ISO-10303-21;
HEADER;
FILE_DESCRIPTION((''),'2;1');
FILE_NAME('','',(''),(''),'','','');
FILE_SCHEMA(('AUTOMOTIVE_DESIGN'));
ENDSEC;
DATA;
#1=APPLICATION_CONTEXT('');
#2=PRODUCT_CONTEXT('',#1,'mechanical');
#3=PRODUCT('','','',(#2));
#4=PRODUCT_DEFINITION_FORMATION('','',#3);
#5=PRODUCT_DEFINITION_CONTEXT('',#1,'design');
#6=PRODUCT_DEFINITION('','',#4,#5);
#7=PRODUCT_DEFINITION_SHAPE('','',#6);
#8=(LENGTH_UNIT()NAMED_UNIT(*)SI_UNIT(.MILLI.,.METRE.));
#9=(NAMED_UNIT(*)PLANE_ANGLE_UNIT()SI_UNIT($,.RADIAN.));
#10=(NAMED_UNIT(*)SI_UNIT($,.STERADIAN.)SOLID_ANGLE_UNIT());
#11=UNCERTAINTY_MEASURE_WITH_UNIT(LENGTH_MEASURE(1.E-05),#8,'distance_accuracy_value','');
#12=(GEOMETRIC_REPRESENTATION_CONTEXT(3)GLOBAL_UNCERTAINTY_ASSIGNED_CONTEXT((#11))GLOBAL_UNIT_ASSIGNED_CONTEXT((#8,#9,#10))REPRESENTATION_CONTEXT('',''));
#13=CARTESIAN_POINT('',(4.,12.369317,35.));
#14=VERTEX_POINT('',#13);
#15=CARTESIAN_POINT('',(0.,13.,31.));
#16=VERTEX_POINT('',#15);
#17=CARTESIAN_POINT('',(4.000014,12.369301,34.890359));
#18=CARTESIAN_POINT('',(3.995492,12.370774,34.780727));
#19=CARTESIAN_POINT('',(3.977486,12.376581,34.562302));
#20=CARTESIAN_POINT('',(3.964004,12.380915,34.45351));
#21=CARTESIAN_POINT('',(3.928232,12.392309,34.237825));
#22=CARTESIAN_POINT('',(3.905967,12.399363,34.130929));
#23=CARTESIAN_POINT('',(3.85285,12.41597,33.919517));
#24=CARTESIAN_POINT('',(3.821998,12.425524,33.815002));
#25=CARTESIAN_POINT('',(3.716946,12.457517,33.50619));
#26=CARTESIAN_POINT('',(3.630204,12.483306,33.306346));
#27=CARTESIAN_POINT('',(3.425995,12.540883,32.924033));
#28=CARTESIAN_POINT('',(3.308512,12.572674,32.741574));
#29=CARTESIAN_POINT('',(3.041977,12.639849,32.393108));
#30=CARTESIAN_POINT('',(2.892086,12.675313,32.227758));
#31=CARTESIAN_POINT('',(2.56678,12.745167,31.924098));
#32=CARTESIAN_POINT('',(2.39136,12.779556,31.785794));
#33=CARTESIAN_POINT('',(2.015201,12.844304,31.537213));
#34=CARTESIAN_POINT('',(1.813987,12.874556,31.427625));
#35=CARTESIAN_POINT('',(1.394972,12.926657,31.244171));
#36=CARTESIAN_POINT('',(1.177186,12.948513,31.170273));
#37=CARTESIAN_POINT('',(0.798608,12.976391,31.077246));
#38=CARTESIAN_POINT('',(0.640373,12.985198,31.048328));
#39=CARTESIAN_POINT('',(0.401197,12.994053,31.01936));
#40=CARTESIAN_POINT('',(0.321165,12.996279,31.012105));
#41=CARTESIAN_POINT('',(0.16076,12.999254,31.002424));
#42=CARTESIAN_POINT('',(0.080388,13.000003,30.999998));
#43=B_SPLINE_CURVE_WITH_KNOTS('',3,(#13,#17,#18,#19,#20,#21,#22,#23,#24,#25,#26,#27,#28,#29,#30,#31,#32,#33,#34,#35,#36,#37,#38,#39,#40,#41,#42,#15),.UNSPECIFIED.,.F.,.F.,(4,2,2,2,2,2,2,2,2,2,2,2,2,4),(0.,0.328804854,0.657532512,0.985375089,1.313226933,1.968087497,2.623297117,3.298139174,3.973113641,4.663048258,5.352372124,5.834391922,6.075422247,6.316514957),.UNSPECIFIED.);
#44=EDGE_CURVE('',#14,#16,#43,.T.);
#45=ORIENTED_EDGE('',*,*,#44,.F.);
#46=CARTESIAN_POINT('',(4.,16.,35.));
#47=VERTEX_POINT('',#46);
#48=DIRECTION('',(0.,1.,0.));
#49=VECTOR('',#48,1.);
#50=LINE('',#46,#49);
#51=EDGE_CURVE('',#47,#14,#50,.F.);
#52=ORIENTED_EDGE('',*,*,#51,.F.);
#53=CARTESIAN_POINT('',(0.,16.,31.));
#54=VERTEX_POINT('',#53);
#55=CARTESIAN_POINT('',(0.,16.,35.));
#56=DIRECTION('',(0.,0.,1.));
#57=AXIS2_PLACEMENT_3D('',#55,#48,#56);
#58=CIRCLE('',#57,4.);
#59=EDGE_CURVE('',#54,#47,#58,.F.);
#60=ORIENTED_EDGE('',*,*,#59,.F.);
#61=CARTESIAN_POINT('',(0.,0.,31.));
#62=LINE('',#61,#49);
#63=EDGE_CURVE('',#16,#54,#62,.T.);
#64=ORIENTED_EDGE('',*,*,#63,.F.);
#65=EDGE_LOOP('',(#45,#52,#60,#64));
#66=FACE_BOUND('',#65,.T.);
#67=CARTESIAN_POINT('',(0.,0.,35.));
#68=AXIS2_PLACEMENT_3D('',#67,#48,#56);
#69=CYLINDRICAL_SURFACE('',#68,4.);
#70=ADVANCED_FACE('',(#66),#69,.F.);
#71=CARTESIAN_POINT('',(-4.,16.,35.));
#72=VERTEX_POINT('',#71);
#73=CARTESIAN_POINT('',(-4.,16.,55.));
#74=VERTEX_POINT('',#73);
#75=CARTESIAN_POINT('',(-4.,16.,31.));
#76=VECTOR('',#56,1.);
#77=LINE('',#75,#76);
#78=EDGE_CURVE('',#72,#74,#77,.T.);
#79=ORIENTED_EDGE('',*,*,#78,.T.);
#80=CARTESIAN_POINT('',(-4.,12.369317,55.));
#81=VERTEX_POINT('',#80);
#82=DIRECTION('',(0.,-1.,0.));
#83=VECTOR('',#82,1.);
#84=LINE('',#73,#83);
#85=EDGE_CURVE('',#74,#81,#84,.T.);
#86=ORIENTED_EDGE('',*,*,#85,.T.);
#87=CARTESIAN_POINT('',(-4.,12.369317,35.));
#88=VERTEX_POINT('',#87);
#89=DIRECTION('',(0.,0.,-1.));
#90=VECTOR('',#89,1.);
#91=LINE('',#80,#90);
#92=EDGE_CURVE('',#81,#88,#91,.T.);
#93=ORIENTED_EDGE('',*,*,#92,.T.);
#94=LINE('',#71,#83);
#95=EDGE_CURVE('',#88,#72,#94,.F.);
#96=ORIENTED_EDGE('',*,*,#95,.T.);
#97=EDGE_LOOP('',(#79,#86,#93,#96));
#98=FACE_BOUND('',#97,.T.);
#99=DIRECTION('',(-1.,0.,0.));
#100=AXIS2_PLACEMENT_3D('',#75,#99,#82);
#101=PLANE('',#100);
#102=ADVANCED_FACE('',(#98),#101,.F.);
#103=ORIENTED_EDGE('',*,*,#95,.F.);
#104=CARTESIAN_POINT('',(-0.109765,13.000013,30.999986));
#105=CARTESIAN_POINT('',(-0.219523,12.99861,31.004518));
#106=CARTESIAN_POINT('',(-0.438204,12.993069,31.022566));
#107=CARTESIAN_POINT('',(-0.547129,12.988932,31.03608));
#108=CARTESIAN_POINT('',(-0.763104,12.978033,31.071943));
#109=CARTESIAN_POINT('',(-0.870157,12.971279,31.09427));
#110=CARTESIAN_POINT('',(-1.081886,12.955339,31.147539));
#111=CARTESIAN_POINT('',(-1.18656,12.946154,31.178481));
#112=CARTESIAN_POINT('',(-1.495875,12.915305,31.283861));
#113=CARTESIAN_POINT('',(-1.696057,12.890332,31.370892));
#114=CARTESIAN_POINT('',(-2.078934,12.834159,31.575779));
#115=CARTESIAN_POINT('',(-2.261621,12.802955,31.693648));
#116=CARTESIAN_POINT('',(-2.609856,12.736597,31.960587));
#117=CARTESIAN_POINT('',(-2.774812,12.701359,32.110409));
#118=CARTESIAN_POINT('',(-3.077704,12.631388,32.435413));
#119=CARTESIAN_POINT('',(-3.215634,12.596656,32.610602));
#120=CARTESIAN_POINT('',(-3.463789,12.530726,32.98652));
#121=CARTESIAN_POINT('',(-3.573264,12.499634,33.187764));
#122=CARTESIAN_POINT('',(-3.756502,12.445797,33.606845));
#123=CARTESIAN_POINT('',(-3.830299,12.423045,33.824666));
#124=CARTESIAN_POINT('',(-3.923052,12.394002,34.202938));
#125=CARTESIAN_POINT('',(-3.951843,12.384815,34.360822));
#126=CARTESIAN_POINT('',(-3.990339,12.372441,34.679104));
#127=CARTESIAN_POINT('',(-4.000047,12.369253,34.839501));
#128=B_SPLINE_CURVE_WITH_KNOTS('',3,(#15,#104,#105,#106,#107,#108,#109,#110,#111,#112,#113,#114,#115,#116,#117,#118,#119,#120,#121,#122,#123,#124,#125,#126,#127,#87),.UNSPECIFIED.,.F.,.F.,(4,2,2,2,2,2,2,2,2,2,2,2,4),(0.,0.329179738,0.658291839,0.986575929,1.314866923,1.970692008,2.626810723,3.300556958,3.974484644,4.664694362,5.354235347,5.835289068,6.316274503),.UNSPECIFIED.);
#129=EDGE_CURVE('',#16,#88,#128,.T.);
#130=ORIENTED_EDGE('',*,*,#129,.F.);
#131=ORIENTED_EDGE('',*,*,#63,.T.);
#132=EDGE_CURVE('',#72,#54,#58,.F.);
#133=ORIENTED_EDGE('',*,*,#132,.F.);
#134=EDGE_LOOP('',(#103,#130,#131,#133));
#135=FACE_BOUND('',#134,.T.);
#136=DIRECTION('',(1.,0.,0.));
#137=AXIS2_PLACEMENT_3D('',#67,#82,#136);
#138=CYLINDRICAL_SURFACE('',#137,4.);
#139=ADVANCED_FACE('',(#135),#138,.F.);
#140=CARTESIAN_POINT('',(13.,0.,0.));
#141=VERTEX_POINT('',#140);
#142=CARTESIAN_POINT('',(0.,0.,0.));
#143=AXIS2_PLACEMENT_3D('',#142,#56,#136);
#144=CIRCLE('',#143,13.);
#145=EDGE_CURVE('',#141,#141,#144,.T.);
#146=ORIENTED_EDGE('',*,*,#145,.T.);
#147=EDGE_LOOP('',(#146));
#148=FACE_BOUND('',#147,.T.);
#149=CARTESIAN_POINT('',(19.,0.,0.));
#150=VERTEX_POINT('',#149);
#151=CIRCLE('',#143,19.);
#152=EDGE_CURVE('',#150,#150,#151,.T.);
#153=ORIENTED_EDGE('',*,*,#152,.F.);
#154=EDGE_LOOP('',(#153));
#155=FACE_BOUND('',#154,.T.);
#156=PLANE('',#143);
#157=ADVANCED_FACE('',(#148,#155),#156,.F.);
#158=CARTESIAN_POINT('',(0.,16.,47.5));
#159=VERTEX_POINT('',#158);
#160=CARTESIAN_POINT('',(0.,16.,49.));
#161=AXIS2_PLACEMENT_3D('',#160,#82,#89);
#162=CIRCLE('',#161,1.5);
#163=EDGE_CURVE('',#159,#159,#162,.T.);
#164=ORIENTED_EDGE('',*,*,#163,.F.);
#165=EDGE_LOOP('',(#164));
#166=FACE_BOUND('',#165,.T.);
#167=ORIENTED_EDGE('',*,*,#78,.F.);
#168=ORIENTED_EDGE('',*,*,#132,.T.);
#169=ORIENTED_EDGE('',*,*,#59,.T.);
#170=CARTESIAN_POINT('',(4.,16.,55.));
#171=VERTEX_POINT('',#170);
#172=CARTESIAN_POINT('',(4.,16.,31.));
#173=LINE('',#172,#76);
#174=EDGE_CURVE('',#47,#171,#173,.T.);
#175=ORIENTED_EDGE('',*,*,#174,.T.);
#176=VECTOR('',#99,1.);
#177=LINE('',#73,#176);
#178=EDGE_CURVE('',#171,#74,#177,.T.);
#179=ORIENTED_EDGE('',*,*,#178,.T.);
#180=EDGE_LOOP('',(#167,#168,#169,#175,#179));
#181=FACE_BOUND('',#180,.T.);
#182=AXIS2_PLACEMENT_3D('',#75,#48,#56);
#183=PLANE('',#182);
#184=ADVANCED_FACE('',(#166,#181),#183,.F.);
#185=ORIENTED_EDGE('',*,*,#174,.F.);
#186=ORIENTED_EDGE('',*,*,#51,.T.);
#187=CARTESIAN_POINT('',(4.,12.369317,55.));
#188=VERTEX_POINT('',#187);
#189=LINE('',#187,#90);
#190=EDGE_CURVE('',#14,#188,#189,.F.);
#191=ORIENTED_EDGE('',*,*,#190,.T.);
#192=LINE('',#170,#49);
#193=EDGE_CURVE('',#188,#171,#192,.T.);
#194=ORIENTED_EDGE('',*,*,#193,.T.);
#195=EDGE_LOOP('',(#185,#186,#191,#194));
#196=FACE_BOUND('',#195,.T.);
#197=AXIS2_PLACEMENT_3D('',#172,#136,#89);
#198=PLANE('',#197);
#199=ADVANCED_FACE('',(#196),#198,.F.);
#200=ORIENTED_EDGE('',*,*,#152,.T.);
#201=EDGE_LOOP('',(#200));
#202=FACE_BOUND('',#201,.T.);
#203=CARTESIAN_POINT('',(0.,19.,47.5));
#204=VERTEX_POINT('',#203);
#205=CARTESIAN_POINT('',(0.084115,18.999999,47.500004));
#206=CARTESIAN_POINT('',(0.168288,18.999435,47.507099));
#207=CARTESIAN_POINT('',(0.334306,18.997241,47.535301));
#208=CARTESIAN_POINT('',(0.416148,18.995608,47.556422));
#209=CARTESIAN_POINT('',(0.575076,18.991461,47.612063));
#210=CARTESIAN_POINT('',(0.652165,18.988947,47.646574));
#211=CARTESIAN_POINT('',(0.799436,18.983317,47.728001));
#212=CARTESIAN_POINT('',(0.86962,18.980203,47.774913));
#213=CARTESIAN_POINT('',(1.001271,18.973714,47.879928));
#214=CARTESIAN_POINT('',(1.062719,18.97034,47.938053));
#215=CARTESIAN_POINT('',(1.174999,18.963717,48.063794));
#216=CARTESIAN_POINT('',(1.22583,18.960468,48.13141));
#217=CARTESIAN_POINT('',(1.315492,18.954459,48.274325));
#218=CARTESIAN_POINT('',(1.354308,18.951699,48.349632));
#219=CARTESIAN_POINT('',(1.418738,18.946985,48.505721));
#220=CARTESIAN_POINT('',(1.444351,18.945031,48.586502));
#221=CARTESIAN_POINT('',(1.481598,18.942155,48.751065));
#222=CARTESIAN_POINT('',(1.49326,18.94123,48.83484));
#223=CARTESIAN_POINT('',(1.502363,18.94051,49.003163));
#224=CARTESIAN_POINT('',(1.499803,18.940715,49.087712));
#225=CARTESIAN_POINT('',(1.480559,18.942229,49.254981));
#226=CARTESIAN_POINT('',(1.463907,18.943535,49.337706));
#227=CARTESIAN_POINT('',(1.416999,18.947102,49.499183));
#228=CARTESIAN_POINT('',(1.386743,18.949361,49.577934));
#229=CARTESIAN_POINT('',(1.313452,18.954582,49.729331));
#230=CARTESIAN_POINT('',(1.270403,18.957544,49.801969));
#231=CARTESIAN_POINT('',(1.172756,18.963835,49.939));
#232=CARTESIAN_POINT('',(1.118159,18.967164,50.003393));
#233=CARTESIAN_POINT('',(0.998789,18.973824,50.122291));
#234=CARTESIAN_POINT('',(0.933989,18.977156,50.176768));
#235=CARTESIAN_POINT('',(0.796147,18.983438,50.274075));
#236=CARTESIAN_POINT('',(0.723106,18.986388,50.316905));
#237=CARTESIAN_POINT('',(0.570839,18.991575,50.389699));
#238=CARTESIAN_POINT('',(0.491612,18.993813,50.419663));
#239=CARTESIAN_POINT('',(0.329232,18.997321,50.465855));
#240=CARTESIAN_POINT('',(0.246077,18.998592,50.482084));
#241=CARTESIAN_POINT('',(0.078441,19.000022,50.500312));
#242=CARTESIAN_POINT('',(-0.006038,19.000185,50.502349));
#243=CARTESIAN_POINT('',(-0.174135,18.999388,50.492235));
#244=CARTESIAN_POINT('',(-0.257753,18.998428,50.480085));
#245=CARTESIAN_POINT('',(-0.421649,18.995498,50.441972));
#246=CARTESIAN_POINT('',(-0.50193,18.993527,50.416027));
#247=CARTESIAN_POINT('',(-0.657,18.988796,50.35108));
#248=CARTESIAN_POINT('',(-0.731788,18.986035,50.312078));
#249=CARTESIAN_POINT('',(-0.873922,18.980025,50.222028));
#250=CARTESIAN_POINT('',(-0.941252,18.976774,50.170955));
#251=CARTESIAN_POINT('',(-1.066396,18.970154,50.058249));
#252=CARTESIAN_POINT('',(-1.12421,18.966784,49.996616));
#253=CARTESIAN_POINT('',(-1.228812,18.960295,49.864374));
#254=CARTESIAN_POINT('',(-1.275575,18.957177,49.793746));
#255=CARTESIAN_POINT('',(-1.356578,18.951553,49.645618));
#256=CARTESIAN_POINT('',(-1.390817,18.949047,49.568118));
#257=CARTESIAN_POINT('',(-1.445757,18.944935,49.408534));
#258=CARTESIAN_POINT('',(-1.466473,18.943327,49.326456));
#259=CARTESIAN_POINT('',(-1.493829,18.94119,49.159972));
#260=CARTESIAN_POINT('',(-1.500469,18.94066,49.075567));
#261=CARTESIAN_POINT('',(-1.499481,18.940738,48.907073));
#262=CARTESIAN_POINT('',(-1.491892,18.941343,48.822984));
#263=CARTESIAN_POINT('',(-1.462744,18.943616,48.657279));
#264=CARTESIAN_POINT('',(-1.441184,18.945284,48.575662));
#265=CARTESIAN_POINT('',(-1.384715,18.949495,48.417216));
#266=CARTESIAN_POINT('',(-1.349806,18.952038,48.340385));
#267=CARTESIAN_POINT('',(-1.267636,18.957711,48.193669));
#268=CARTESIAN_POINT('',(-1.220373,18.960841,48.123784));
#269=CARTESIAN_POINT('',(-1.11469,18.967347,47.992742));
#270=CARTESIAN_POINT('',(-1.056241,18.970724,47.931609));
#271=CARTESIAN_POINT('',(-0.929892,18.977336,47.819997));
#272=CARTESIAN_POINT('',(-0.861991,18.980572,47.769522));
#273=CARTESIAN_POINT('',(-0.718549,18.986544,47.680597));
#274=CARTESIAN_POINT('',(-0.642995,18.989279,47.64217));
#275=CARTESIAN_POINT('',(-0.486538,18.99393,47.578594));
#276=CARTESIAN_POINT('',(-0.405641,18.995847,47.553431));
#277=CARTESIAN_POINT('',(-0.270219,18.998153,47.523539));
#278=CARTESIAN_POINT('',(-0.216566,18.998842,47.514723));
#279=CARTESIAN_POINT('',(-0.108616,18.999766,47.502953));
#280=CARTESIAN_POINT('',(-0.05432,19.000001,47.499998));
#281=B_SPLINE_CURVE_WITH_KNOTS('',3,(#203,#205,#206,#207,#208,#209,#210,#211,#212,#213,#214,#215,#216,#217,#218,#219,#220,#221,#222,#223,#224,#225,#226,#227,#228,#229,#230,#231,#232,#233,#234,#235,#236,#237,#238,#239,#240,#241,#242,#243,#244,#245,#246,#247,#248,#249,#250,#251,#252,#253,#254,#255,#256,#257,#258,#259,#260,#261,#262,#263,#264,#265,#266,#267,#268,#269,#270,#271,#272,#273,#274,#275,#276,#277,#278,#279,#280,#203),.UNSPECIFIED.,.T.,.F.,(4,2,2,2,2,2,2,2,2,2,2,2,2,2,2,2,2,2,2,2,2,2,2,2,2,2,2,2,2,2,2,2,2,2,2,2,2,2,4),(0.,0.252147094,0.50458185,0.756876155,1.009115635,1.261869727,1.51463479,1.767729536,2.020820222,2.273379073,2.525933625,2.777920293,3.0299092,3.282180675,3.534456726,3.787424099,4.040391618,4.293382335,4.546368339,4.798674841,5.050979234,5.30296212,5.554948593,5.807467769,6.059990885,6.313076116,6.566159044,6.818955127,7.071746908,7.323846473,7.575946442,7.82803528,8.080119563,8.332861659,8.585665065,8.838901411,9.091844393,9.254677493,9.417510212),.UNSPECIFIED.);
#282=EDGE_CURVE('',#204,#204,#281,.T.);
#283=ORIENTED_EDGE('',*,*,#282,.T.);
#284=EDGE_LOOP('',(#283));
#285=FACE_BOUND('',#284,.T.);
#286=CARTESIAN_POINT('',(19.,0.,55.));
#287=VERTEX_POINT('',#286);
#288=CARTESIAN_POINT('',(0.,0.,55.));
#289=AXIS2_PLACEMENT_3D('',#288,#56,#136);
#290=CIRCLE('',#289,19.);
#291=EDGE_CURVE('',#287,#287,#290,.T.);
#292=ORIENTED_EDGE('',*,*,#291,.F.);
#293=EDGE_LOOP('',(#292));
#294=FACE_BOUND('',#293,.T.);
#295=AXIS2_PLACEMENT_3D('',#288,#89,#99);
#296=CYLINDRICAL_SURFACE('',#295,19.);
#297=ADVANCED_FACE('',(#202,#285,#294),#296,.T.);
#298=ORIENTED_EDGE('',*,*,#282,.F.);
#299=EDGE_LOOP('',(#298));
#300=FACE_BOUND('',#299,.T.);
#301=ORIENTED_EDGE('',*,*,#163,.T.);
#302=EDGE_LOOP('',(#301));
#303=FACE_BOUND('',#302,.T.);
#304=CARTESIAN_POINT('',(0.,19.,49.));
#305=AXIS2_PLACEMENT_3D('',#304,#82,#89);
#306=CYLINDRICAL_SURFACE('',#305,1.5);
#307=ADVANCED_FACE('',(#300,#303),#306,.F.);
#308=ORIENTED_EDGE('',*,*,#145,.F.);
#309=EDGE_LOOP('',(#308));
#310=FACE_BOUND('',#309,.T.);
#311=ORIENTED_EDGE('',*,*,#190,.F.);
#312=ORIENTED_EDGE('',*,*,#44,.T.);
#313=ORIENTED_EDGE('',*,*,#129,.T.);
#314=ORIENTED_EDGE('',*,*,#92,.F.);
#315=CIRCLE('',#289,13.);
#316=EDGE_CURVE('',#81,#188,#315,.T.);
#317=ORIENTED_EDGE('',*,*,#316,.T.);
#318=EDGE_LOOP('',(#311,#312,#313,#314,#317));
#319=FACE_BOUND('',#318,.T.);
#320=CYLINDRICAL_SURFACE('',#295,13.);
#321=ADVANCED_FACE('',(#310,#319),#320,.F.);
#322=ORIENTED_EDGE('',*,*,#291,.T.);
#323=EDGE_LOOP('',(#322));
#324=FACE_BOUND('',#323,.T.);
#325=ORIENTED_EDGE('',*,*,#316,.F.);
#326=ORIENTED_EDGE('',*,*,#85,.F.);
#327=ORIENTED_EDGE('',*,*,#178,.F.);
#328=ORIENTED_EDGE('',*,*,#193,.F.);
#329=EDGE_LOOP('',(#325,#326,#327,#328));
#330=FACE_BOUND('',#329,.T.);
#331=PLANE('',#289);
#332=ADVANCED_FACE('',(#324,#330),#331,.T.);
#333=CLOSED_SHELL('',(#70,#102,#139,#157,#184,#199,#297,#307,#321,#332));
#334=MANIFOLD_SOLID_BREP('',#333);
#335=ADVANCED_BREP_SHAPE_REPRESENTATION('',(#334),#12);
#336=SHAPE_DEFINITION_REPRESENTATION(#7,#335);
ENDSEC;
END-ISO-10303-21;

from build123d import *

# Parameters (mm, degrees)
SKETCH1_R           = 19
SKETCH1_R_2         = 13
BOSS_EXTRUDE1_DEPTH = 55
SKETCH2_W           = 8
SKETCH2_H           = 6
CUT_EXTRUDE3_DEPTH  = 24
FILLET5_R           = 4
FILLET6_R           = 4
SKETCH3_R           = 1.5
CUT_EXTRUDE11_DEPTH = 68.904344566


with BuildPart() as part:
    # Sketch1 → Boss-Extrude1 (new body)
    with BuildSketch(Plane.XY):
        Circle(SKETCH1_R)
        Circle(SKETCH1_R_2, mode=Mode.SUBTRACT)
    extrude(amount=BOSS_EXTRUDE1_DEPTH)

    # Sketch2 → Cut-Extrude3 (cut)
    with BuildSketch(Plane.XY.offset(55)):
        with Locations((0, 13)):
            Rectangle(SKETCH2_W, SKETCH2_H)
    extrude(amount=-CUT_EXTRUDE3_DEPTH, mode=Mode.SUBTRACT)

    # Fillet5
    fillet5_edges = [part.edges().sort_by_distance(p)[0] for p in [
        (4, 14.184658438, 31),
    ]]
    fillet(fillet5_edges, radius=FILLET5_R)

    # Fillet6
    fillet6_edges = [part.edges().sort_by_distance(p)[0] for p in [
        (-4, 14.184658438, 31),
    ]]
    fillet(fillet6_edges, radius=FILLET6_R - 0.0001)  # a hair under: the kernel refuses the full size

    # Sketch3 → Cut-Extrude11 (cut, through all)
    with BuildSketch(Plane(origin=(0, 16, 0), x_dir=(-1, 0, 0), z_dir=(0, -1, 0))):
        with Locations(Location((0, -49, 0), (0, 0, 90))):
            Circle(SKETCH3_R)
    extrude(amount=-CUT_EXTRUDE11_DEPTH, mode=Mode.SUBTRACT)


solid = part.part
